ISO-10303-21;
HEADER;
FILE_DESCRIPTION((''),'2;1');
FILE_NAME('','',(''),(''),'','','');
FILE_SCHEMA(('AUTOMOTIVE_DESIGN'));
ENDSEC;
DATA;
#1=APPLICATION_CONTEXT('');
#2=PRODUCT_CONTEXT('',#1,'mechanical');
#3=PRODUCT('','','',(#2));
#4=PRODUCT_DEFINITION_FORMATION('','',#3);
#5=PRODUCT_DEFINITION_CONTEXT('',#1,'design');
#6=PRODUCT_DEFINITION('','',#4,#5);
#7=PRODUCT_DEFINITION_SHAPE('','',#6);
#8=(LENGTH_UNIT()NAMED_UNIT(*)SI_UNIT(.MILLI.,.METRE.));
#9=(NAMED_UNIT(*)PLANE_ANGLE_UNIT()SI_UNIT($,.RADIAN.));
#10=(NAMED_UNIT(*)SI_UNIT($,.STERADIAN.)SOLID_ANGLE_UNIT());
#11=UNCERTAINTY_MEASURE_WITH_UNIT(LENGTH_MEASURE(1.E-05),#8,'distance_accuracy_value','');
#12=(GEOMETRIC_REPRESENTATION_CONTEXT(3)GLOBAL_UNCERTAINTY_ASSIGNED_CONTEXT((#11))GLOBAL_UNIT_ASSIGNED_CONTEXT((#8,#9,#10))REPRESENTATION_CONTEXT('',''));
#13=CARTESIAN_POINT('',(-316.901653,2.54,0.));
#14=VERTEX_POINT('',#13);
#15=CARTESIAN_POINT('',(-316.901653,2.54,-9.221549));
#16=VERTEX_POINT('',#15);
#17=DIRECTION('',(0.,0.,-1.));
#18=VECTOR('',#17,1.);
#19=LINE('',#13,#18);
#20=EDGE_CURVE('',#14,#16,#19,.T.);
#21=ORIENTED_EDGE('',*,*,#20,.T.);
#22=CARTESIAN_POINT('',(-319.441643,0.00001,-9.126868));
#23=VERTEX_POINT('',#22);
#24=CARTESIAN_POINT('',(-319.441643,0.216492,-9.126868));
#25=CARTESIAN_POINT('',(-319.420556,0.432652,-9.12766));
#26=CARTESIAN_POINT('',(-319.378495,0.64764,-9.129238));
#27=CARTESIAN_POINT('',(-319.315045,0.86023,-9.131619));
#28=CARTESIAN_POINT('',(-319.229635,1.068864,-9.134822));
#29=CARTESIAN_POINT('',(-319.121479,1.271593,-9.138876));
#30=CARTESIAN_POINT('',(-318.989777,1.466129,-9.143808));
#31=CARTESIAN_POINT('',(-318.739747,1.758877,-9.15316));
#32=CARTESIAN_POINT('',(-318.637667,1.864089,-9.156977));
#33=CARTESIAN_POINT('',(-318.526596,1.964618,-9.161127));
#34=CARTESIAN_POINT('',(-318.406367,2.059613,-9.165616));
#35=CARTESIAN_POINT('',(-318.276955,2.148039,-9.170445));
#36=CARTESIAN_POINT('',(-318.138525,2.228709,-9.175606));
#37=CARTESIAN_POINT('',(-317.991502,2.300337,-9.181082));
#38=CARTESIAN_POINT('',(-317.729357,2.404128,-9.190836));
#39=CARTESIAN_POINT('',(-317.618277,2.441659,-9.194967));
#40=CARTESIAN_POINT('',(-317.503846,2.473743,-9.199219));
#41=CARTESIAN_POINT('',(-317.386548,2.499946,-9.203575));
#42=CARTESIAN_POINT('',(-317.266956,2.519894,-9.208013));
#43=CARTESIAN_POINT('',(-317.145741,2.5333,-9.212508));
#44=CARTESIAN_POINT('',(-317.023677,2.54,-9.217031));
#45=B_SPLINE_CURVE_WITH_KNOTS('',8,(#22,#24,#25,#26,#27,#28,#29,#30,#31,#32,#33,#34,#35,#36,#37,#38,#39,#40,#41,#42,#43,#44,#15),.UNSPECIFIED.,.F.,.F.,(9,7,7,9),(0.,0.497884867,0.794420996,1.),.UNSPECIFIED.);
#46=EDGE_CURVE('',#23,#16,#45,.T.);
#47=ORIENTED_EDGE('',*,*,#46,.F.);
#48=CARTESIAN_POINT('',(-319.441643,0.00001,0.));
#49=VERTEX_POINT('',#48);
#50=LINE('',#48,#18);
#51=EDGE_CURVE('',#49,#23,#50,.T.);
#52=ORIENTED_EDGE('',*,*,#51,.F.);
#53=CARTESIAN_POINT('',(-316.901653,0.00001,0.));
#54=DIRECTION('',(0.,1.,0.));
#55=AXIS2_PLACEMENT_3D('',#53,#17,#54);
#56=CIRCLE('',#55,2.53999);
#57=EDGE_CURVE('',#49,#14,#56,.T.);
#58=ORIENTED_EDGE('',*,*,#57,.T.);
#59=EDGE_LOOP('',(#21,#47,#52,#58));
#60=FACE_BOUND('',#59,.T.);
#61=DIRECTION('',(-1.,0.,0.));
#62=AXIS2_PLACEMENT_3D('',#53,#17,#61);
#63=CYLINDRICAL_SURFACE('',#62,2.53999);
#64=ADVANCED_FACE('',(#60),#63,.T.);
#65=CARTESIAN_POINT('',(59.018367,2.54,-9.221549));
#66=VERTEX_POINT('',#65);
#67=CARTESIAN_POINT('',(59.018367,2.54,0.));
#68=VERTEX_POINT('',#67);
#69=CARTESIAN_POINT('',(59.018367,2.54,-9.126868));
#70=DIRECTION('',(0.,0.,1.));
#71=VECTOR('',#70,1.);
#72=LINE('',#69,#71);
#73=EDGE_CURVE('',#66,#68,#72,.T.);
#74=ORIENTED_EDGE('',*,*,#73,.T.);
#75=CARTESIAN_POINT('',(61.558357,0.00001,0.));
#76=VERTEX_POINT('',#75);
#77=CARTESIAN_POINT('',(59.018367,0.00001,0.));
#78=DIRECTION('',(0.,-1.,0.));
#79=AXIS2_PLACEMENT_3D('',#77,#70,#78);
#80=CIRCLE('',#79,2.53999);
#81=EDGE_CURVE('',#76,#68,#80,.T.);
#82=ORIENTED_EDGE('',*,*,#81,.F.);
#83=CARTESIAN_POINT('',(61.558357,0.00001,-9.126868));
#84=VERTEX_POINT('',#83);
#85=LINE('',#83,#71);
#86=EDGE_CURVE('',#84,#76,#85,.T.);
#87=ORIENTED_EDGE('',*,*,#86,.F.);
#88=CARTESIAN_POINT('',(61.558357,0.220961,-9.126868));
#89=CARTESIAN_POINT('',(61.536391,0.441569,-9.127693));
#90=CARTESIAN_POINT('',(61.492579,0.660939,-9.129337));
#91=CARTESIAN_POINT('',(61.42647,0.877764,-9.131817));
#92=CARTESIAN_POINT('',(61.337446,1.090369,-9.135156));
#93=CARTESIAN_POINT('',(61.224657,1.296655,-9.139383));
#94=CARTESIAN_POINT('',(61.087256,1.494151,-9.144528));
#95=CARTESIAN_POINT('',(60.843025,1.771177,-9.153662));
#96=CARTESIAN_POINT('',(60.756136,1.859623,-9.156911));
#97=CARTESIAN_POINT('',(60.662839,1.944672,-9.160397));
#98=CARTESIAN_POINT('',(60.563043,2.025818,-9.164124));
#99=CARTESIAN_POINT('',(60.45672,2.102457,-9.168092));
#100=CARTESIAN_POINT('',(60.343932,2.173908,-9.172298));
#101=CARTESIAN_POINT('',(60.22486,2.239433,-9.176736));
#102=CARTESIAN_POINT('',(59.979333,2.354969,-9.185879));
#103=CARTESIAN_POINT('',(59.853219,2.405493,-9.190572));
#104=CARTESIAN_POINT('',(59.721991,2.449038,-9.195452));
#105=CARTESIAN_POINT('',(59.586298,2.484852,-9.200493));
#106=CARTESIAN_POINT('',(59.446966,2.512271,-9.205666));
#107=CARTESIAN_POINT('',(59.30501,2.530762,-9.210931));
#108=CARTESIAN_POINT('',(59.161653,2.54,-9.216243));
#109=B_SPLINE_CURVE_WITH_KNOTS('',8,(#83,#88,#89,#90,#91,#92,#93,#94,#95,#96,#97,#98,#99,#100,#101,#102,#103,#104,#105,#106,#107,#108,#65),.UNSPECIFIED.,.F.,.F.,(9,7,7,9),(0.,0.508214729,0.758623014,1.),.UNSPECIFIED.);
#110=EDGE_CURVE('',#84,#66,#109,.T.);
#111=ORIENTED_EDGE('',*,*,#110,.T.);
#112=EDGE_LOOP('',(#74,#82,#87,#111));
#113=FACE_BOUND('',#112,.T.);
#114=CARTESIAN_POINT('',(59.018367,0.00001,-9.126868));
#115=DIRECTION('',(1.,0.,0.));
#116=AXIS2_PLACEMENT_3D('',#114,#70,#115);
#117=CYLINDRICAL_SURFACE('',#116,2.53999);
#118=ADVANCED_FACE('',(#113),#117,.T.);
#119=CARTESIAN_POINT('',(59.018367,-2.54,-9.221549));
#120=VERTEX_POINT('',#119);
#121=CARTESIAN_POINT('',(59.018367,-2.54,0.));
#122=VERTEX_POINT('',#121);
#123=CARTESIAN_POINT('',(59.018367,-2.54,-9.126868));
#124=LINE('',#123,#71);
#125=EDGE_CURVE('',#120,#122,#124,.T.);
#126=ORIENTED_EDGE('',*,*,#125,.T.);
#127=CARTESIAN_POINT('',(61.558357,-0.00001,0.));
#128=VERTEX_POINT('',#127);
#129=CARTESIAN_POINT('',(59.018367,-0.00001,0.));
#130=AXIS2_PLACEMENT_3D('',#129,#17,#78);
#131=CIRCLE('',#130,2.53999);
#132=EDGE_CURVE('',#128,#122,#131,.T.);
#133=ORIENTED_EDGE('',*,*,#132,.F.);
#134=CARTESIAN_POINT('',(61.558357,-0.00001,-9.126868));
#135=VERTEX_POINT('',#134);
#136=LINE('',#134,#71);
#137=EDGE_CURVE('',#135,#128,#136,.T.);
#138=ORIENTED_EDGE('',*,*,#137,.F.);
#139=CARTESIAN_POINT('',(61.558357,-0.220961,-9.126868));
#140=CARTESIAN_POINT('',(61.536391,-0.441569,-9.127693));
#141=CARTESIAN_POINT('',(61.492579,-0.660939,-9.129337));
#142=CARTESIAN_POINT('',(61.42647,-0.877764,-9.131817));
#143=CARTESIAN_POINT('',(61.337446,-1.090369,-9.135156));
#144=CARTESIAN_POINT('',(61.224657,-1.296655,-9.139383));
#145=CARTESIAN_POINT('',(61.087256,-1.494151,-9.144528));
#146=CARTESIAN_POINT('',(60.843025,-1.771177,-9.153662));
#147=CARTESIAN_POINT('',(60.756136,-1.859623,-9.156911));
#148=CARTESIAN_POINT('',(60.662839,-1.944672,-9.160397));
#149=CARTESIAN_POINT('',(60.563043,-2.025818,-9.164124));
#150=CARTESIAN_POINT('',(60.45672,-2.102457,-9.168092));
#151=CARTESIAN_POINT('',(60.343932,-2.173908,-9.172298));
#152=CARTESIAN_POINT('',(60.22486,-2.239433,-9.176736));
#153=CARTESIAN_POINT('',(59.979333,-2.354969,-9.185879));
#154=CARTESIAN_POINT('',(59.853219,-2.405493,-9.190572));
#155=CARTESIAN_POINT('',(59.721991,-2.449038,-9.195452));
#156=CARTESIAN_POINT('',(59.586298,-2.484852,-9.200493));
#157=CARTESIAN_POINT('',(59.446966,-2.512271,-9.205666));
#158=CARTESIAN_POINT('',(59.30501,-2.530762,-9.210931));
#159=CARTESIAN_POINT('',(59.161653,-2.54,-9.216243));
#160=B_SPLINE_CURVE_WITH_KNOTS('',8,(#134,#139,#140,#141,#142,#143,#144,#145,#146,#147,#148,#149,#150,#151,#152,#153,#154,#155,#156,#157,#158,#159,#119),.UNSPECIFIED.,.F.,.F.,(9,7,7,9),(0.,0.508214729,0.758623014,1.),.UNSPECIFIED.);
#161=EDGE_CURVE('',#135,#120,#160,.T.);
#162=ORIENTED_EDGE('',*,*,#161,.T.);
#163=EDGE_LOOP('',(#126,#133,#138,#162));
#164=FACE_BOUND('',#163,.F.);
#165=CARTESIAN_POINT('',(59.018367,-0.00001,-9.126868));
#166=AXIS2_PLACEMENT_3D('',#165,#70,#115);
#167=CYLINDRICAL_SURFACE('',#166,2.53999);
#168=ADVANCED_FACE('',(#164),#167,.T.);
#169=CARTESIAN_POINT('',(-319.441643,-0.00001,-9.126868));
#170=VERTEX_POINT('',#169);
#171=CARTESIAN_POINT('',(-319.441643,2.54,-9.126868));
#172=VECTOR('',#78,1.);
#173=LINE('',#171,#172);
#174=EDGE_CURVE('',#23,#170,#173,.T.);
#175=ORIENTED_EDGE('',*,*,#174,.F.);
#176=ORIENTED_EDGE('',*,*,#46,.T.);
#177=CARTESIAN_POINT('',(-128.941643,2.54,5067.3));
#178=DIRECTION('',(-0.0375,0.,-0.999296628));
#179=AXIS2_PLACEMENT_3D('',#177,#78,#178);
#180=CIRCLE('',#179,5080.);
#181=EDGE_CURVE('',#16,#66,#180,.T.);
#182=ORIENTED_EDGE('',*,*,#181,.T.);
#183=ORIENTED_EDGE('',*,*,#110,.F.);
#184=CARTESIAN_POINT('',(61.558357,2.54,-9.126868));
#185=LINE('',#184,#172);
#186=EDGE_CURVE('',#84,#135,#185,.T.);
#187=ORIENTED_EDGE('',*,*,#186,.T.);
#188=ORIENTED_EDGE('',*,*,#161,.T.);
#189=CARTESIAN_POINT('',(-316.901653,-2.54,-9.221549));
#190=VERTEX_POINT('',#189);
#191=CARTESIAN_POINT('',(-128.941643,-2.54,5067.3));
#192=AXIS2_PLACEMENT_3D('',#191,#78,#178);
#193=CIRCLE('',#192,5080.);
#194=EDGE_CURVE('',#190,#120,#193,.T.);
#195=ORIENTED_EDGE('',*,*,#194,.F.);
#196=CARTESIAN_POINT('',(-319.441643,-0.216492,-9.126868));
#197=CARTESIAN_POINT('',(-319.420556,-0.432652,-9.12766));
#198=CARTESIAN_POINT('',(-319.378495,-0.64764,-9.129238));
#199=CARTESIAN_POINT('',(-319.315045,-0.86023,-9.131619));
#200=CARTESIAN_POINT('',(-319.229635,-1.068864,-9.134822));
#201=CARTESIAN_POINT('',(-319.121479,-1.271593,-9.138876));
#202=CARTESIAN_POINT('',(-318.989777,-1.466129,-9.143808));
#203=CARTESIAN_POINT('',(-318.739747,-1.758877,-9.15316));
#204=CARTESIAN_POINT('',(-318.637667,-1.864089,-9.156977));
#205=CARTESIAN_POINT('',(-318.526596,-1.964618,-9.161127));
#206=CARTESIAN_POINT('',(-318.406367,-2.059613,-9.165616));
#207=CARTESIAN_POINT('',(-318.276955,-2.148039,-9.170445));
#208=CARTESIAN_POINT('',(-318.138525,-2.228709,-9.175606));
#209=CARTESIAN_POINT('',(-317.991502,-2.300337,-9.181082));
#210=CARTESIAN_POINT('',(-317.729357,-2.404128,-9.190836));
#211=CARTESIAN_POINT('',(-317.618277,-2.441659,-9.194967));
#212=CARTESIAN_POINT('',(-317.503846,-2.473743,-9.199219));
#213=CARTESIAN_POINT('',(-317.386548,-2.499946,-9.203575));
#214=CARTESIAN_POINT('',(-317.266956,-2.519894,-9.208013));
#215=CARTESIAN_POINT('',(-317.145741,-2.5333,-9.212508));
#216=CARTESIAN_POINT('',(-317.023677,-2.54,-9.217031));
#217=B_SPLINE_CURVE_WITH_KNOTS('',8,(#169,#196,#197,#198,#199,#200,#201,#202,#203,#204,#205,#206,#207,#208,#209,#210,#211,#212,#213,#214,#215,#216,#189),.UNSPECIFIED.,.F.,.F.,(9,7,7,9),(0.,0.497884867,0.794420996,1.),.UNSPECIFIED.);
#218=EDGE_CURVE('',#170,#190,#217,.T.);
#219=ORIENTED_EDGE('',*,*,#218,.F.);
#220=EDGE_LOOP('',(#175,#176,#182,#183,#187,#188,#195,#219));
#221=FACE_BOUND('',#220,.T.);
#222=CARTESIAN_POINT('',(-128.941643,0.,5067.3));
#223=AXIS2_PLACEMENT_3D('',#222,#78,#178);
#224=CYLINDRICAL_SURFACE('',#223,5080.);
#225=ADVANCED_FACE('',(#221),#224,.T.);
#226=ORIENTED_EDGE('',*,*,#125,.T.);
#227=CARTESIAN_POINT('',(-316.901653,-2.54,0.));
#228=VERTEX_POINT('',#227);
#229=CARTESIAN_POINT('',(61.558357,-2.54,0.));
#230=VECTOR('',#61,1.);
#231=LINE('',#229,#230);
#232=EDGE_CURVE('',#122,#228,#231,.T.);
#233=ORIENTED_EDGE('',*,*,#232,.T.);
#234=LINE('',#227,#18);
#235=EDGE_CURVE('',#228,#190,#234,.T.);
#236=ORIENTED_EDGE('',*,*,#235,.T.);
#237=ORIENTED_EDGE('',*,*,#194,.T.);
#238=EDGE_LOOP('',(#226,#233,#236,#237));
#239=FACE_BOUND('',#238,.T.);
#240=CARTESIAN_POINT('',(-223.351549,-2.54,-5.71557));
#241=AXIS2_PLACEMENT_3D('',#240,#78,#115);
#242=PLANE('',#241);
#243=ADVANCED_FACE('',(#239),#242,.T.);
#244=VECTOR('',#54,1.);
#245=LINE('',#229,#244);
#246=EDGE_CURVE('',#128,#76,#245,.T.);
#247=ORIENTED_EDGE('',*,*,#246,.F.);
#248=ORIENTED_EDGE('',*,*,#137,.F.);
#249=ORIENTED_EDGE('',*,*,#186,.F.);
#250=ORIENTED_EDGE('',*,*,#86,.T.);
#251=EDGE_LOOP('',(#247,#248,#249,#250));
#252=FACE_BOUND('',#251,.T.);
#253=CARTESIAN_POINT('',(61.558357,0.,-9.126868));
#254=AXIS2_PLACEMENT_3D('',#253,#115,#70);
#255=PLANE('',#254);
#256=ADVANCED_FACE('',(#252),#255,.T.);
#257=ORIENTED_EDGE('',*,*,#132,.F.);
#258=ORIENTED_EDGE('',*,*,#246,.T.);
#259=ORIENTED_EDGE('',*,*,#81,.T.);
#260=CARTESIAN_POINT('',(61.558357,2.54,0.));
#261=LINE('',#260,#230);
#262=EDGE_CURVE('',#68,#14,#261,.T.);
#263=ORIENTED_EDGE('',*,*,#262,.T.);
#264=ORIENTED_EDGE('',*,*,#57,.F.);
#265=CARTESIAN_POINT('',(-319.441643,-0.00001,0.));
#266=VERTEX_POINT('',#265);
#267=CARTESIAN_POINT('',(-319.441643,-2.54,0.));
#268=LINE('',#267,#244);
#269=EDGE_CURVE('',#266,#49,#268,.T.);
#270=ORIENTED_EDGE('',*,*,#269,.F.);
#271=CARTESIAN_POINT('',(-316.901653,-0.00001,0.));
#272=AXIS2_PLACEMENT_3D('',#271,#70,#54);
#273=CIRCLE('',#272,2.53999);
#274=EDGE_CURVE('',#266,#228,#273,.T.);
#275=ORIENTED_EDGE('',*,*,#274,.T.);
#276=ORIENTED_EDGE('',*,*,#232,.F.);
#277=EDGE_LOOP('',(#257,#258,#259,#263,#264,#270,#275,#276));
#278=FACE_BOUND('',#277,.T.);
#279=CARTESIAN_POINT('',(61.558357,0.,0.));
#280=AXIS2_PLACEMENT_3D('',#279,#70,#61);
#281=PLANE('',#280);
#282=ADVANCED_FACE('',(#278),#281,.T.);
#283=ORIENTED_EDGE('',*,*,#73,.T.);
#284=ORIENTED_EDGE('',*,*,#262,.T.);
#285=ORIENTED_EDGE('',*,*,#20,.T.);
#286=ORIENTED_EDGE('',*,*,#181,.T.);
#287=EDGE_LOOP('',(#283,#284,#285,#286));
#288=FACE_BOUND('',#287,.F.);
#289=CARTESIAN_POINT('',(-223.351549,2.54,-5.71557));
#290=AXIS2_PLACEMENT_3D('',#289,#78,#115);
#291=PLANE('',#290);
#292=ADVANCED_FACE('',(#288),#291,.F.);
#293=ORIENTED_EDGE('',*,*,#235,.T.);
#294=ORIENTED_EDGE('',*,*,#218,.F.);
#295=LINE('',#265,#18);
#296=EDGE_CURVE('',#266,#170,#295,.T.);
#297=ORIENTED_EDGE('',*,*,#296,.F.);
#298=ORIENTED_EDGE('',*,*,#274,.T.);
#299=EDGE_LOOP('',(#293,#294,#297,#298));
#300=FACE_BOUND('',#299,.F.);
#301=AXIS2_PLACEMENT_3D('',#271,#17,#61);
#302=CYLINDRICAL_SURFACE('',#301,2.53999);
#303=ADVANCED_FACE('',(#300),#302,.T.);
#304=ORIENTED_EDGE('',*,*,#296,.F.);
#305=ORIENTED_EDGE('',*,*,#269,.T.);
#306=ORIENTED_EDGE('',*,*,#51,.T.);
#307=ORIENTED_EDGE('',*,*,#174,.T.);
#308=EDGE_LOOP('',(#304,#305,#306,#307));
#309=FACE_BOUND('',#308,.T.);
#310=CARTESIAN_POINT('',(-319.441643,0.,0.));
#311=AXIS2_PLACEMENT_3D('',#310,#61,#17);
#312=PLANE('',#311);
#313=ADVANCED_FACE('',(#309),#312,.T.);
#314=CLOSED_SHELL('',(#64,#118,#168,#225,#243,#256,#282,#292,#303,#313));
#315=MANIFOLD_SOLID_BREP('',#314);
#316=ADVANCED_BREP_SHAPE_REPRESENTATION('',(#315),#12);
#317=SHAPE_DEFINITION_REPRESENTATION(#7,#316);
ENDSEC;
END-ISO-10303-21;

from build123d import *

# Parameters (mm, degrees)
F1_DEPTH = 2.54
F2_R     = 2.53999


# Not quite as in the source:
# - a fillet or chamfer is up to 0.001 mm smaller than in the source, because OpenCascade refuses the exact size


with BuildPart() as f1:
    # F0 (on Front) → F1 (new body, symmetric)
    with BuildSketch(Plane.XZ):
        with BuildLine():
            Line((-128.9416431369, 0), (-319.4416431369, 0))
            Line((-319.4416431369, 0), (-319.4416431369, -9.126868379))
            ThreePointArc((-319.4416431369, -9.126868379), (-224.2083966105, -11.8066385421), (-128.9416431369, -12.7))
            Line((-128.9416431369, -12.7), (-128.9416431369, 0))
        make_face()
        with BuildLine():
            Line((61.5583568631, 0), (-128.9416431369, 0))
            Line((-128.9416431369, 0), (-128.9416431369, -12.7))
            ThreePointArc((-128.9416431369, -12.7), (-33.6748896633, -11.8066385421), (61.5583568631, -9.126868379))
            Line((61.5583568631, -9.126868379), (61.5583568631, 0))
        make_face()
    extrude(amount=F1_DEPTH, both=True)

    # F2 (radius 2.54 in the source; OpenCascade refuses exactly that, so slightly less here)
    f2_edges = [f1.edges().sort_by_distance(p)[0] for p in [
        (-319.441643, -2.54, -4.563434),
        (-319.441643, 2.54, -4.563434),
        (61.558357, -2.54, -4.563434),
        (61.558357, 2.54, -4.563434),
    ]]
    fillet(f2_edges, radius=F2_R)


solid = f1.part
